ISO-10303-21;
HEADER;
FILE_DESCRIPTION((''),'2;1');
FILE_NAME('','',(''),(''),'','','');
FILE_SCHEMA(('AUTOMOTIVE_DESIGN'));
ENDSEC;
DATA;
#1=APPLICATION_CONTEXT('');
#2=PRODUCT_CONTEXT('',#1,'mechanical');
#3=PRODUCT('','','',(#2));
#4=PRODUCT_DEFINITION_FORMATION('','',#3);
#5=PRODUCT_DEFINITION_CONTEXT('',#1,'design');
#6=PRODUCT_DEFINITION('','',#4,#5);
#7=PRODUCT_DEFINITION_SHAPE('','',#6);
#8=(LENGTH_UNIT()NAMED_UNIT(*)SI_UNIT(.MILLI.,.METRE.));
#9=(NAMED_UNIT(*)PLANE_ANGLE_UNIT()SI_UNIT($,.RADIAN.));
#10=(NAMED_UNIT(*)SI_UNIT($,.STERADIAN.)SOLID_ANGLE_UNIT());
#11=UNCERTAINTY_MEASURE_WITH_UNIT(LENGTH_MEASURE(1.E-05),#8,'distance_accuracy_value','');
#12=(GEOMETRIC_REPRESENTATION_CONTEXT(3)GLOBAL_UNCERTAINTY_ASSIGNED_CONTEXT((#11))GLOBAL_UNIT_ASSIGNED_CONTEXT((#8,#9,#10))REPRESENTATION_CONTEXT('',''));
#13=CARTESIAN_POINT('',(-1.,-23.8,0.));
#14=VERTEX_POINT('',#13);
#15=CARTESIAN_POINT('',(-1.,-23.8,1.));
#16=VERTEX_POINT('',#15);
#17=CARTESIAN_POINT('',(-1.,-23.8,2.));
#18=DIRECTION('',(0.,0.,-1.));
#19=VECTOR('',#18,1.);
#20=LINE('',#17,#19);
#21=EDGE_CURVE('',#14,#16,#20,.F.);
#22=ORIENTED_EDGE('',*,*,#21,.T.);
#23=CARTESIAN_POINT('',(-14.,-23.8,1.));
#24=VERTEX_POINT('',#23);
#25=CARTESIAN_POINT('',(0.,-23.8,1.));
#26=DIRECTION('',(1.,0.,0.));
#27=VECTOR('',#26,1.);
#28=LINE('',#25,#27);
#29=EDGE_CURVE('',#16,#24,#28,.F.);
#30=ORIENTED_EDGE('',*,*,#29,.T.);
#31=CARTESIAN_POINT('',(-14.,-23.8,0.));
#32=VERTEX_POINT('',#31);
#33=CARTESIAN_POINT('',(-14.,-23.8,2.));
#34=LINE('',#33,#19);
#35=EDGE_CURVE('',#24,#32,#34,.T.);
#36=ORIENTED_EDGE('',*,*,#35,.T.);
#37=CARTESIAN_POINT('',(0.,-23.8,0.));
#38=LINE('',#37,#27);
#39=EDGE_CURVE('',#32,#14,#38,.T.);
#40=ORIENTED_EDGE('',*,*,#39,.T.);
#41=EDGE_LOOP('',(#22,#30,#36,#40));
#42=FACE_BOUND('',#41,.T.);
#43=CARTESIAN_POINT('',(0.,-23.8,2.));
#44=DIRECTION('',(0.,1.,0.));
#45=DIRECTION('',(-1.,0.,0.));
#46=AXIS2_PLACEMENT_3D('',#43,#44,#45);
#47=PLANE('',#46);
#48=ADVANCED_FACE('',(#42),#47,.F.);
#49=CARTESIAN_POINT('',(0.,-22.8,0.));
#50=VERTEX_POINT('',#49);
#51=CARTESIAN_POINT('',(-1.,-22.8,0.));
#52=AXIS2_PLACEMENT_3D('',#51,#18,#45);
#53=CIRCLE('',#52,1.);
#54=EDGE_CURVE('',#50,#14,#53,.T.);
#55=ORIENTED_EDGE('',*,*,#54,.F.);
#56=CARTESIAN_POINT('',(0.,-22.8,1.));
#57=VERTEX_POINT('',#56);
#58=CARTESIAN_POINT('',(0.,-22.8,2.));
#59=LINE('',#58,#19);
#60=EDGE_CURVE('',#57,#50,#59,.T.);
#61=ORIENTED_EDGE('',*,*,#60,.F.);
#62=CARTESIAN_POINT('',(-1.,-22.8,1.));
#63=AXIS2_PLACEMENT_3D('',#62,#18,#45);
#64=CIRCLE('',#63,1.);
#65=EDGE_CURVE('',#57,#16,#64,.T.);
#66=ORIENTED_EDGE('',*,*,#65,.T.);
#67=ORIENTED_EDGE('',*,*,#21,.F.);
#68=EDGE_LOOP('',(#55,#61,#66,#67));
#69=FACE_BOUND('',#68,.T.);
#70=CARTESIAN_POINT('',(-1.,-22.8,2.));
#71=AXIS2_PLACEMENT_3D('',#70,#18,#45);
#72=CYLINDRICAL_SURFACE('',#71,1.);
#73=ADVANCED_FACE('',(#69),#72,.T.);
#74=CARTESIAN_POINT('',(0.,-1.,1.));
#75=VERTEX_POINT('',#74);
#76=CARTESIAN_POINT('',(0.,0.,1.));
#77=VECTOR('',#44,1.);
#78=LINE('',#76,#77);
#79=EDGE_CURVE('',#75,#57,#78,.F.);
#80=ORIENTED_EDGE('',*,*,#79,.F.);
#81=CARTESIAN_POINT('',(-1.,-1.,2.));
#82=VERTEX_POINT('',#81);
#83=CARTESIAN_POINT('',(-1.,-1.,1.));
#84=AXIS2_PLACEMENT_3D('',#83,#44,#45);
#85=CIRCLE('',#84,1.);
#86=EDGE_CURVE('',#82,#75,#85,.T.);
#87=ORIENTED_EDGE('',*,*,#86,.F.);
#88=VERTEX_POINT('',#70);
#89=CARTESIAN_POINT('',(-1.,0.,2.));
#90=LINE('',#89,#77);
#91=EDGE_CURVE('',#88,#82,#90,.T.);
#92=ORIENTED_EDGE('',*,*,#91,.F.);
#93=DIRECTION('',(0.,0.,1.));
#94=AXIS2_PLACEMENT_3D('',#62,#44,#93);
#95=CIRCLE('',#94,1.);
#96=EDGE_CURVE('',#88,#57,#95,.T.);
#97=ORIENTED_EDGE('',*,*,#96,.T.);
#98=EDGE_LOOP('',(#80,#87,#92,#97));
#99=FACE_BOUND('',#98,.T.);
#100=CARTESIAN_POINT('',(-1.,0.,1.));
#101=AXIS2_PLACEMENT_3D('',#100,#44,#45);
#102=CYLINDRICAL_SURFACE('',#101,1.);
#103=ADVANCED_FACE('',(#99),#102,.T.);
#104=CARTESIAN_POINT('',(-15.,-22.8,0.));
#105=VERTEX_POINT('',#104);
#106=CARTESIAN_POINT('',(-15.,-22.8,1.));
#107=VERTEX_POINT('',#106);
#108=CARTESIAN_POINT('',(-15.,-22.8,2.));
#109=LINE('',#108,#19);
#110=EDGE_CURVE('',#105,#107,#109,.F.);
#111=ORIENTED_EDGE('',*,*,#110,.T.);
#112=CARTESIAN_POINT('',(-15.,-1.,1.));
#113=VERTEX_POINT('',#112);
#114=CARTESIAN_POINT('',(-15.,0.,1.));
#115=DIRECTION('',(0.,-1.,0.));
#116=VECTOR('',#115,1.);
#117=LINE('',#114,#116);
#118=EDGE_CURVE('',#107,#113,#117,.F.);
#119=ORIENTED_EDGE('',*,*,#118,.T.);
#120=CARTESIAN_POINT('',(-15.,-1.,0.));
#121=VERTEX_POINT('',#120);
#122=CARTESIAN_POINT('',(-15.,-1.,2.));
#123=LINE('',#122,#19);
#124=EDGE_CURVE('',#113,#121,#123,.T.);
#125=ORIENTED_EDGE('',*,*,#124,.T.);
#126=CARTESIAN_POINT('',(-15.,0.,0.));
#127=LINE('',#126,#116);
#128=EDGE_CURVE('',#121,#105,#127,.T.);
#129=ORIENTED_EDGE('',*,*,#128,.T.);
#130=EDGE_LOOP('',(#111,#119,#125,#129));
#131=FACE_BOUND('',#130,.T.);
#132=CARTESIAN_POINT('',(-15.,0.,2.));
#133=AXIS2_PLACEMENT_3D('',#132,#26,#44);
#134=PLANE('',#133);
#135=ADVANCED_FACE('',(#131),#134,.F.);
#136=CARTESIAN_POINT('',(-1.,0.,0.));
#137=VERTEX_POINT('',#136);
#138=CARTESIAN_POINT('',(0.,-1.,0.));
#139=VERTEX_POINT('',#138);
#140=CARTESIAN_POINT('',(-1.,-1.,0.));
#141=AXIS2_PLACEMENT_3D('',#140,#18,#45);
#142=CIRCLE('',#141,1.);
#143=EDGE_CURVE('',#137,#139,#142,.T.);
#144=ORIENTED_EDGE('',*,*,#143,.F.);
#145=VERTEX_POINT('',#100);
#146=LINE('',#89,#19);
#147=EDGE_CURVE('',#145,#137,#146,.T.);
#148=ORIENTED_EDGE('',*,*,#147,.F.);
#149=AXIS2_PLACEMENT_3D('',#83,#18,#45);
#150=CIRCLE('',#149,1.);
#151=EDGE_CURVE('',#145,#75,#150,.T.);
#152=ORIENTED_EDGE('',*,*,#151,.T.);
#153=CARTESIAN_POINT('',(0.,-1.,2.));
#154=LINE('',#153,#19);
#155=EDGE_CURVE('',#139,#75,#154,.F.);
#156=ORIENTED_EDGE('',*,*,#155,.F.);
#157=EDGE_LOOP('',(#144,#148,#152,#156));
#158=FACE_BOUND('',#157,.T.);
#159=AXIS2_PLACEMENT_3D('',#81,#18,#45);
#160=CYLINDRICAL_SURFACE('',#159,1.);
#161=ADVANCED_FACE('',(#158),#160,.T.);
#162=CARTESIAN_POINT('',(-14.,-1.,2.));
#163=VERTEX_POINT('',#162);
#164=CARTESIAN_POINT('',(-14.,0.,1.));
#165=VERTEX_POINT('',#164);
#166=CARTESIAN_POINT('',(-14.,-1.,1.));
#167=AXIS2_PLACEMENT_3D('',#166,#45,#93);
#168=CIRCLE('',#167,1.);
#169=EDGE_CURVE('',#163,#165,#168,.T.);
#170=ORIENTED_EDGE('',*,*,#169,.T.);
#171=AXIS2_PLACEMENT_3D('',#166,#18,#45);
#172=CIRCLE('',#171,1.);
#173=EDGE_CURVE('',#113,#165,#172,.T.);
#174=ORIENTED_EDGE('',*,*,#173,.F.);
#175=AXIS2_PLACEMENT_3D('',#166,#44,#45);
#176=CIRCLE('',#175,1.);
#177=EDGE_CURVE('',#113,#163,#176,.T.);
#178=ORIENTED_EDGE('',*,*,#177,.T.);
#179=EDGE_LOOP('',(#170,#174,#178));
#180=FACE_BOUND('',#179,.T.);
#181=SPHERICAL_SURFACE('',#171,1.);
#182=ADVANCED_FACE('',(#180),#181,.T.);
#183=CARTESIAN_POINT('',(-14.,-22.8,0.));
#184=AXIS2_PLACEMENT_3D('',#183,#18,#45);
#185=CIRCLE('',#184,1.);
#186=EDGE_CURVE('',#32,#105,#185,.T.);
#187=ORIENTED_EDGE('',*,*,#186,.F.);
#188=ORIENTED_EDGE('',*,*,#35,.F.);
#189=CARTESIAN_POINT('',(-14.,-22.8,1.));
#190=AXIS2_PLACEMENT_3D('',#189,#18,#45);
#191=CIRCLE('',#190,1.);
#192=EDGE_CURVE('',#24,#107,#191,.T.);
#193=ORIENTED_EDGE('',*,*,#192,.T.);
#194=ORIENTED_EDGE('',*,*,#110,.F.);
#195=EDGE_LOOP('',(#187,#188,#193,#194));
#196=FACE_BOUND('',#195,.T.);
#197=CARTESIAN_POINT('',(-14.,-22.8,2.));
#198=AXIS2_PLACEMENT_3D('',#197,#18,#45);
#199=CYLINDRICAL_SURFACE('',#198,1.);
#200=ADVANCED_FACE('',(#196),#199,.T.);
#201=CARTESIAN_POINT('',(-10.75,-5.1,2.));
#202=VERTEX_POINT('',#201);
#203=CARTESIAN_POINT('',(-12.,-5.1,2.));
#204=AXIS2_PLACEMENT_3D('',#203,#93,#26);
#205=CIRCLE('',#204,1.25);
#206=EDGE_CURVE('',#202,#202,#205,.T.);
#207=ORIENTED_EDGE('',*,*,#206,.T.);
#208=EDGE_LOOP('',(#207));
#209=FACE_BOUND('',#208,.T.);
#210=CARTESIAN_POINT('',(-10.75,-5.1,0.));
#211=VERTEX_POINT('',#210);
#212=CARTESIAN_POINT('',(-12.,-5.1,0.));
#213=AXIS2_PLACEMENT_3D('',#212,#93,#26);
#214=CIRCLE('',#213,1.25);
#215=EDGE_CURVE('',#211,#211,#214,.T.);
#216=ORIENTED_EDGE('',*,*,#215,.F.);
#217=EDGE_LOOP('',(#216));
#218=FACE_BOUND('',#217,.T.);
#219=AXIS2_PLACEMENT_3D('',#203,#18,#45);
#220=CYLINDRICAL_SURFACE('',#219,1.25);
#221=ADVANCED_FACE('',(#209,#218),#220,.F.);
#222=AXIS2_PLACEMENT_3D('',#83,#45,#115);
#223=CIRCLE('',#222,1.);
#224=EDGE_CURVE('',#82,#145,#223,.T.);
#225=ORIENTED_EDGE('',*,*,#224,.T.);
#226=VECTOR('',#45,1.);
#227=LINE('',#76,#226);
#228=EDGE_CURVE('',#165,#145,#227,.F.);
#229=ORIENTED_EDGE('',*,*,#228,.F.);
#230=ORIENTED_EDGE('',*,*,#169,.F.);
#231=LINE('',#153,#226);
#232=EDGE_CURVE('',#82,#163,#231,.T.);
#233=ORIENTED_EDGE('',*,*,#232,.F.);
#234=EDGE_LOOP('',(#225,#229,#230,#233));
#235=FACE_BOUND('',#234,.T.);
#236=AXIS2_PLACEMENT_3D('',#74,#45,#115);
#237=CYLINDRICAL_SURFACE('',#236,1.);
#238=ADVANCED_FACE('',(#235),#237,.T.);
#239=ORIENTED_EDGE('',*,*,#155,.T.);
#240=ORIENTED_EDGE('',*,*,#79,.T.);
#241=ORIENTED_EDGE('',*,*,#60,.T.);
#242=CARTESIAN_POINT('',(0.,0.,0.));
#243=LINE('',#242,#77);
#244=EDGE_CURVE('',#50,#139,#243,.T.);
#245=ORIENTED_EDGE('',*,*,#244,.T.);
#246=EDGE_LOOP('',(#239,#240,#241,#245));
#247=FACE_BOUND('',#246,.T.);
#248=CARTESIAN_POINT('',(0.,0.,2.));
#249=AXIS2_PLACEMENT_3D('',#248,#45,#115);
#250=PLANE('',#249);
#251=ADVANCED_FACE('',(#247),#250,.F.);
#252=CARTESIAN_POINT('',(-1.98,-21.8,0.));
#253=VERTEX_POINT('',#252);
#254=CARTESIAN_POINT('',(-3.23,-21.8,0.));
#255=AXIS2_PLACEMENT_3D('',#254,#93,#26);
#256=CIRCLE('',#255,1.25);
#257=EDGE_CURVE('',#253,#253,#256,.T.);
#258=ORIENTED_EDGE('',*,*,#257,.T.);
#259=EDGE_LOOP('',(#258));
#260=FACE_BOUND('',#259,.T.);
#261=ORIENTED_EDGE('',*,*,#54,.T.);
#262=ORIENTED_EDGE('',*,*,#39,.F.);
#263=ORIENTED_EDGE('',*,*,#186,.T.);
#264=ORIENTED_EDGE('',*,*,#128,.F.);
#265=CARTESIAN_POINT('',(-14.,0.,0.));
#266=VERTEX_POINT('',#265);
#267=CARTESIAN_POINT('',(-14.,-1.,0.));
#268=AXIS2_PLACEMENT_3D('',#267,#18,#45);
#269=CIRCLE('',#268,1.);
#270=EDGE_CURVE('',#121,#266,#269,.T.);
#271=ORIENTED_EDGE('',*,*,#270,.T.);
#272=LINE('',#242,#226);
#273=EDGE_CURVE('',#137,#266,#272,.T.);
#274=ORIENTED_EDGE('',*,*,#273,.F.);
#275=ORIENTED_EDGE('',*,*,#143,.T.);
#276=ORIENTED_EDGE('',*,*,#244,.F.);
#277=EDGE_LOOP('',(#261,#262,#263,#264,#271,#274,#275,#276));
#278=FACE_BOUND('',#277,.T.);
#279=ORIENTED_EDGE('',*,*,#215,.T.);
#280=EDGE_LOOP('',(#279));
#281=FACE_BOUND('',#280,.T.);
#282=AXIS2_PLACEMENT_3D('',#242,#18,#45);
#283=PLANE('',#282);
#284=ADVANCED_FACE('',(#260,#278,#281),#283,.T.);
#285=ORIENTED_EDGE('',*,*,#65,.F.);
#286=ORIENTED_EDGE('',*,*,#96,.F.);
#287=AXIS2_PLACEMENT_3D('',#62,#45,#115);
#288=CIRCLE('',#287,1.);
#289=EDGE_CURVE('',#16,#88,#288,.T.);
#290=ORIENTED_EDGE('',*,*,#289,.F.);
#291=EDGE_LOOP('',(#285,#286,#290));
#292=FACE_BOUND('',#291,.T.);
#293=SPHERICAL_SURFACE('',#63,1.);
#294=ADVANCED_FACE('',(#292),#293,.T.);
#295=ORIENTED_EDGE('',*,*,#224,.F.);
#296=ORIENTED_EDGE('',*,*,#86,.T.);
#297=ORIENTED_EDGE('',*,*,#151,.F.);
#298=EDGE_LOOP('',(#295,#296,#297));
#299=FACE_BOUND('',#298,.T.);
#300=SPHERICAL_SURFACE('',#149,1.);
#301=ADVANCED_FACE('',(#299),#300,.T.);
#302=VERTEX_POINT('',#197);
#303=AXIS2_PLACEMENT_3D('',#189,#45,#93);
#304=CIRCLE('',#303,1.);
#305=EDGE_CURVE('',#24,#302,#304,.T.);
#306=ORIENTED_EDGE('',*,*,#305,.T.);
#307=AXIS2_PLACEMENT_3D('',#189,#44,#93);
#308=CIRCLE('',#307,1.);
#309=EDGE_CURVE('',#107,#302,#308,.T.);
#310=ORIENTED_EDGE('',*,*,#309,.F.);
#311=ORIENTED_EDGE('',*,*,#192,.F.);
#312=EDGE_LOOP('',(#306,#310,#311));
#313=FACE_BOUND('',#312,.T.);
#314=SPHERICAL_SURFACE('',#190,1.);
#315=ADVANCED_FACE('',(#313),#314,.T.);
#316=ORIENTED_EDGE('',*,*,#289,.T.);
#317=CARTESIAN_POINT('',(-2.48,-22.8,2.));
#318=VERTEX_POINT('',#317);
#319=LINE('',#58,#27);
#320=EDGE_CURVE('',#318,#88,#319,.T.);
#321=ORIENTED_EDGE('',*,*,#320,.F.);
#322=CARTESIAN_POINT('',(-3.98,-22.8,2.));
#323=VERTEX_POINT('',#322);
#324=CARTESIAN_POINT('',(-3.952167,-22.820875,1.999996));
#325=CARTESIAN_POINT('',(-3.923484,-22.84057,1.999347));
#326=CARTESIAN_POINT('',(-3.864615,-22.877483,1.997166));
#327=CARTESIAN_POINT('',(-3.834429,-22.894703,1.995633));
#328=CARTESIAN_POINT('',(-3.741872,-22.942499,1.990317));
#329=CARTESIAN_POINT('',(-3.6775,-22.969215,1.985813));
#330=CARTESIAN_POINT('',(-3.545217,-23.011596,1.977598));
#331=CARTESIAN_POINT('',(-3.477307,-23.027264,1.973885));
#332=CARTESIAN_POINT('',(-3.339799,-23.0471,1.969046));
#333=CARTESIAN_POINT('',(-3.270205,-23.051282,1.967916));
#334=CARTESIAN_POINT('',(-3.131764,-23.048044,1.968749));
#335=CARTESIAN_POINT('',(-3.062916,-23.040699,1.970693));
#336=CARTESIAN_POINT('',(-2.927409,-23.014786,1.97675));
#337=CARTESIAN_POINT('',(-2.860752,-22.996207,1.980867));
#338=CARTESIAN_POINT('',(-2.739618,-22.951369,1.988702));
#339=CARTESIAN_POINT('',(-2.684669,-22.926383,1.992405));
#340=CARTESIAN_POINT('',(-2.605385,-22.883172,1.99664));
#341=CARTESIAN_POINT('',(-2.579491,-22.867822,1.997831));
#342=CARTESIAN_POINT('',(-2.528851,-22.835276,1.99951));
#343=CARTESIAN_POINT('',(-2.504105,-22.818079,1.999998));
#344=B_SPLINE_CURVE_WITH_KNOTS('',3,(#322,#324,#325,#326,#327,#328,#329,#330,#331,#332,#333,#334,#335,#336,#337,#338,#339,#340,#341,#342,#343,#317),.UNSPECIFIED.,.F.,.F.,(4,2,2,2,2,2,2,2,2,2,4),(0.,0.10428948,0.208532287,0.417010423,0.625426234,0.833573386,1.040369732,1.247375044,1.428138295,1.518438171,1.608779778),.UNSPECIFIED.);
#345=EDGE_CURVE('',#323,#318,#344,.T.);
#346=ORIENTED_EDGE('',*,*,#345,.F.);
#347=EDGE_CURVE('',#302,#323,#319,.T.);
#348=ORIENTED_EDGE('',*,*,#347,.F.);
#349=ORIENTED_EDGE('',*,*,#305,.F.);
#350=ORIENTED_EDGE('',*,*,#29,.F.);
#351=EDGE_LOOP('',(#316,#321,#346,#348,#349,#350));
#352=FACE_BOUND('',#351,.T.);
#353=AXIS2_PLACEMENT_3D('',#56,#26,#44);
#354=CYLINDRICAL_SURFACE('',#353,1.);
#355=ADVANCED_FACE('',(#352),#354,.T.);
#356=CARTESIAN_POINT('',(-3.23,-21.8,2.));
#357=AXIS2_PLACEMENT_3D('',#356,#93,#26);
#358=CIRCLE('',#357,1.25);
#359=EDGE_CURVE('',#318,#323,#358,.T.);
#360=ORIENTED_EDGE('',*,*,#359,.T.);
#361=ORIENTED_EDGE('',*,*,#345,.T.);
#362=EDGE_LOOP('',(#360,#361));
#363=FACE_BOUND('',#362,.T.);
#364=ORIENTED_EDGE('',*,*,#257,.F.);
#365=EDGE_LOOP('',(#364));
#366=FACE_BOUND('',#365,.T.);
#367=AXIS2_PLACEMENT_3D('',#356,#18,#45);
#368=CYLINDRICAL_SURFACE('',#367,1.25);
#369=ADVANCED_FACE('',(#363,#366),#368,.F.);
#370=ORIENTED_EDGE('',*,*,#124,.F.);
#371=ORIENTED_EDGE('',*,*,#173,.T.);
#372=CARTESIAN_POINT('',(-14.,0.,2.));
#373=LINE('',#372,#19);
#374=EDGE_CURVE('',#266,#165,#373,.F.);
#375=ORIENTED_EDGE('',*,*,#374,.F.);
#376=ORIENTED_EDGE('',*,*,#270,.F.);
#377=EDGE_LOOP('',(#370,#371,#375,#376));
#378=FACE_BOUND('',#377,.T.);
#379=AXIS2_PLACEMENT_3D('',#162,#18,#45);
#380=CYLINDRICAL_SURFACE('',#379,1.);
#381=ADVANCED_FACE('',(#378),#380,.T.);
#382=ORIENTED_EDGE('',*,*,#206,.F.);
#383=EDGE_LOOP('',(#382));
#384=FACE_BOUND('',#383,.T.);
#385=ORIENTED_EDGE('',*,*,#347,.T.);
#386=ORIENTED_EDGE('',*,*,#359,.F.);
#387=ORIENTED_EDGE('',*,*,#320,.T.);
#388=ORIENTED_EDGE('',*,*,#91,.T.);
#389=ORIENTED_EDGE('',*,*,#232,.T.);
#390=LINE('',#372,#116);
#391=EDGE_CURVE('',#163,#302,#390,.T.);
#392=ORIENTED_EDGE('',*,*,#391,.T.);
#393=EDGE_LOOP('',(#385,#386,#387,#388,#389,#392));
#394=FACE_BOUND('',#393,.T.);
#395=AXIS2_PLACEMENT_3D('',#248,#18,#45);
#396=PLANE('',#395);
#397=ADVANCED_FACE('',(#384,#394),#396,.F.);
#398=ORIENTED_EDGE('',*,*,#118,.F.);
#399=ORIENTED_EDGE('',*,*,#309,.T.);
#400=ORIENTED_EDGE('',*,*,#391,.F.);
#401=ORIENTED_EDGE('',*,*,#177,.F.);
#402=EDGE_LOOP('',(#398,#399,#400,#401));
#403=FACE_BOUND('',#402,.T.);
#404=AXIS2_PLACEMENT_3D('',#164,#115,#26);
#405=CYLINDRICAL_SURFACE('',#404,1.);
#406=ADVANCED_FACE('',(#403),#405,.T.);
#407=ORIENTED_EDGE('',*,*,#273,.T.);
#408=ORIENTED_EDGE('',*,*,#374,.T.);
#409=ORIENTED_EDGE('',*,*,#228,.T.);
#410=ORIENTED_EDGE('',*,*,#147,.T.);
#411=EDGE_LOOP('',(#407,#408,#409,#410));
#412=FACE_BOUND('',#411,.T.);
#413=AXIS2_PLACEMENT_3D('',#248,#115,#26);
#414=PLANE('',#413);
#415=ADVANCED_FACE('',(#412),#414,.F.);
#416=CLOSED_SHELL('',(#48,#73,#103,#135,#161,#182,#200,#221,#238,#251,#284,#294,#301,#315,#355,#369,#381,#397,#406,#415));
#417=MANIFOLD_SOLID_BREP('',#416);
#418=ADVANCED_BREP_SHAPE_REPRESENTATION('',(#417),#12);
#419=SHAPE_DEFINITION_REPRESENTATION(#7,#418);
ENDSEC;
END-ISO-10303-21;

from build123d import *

# Parameters (mm, degrees)
SCHIZZO1_W                   = 15
SCHIZZO1_H                   = 23.8
SCHIZZO1_R                   = 1.25
ESTRUSIONE_ESTRUSIONE1_DEPTH = 2
RACCORDO1_R                  = 1
RACCORDO2_R                  = 1


with BuildPart() as part:
    # Schizzo1 → Estrusione-Estrusione1 (new body)
    with BuildSketch(Plane.XY):
        with Locations((-7.5, -11.9)):
            Rectangle(SCHIZZO1_W, SCHIZZO1_H)
        with Locations((-12, -5.1)):
            Circle(SCHIZZO1_R, mode=Mode.SUBTRACT)
        with Locations((-3.23, -21.8)):
            Circle(SCHIZZO1_R, mode=Mode.SUBTRACT)
    extrude(amount=ESTRUSIONE_ESTRUSIONE1_DEPTH)

    # Raccordo1
    raccordo1_edges = [part.edges().sort_by_distance(p)[0] for p in [
        (0, -23.8, 1),
        (-15, -23.8, 1),
        (-15, 0, 1),
        (0, 0, 1),
    ]]
    fillet(raccordo1_edges, radius=RACCORDO1_R)

    # Raccordo2
    # the kernel refuses this fillet: 1 mm, written as the material it takes off along each edge
    with BuildSketch(Plane(origin=(0, -22.8, 2), x_dir=(-1, 0, 0), z_dir=(0, 1, 0)), Plane(origin=(-15, -1, 2), x_dir=(1, 0, 0), z_dir=(0, -1, 0))) as raccordo2_piece_1:
        with BuildLine():
            CenterArc((RACCORDO2_R, -RACCORDO2_R), RACCORDO2_R, 90, 90)
            Line((0, -RACCORDO2_R), (0, 0))
            Line((0, 0), (RACCORDO2_R, 0))
        make_face()
    extrude(amount=21.8, mode=Mode.SUBTRACT)
    with BuildSketch(Plane(origin=(-14, -23.8, 2), x_dir=(0, 1, 0), z_dir=(1, 0, 0))) as raccordo2_piece_2:
        with BuildLine():
            CenterArc((RACCORDO2_R, -RACCORDO2_R), RACCORDO2_R, 90, 90)
            Line((0, -RACCORDO2_R), (0, 0))
            Line((0, 0), (RACCORDO2_R, 0))
        make_face()
    extrude(amount=13, mode=Mode.SUBTRACT)
    with BuildSketch(Plane(origin=(-1, 0, 2), x_dir=(0, 0, -1), z_dir=(-1, 0, 0))) as raccordo2_piece_3:
        with BuildLine():
            CenterArc((RACCORDO2_R, RACCORDO2_R), RACCORDO2_R, 180, 90)
            Line((0, RACCORDO2_R), (0, 0))
            Line((0, 0), (RACCORDO2_R, 0))
        make_face()
    extrude(amount=13, mode=Mode.SUBTRACT)
    with BuildSketch(Plane(origin=(-14, -22.8, 2), x_dir=(-1, 0, 0), z_dir=(0, 1, 0))) as raccordo2_piece_4:
        with BuildLine():
            CenterArc((1 - RACCORDO2_R, -RACCORDO2_R), RACCORDO2_R, 0, 90)
            Line((1, -RACCORDO2_R), (1, 0))
            Line((1, 0), (1 - RACCORDO2_R, 0))
        make_face()
    revolve(axis=Axis((-14, -22.8, 2), (0, 0, 1)), revolution_arc=90, mode=Mode.SUBTRACT)
    with BuildSketch(Plane(origin=(-14, -1, 2), x_dir=(0, 1, 0), z_dir=(1, 0, 0))) as raccordo2_piece_5:
        with BuildLine():
            CenterArc((1 - RACCORDO2_R, -RACCORDO2_R), RACCORDO2_R, 0, 90)
            Line((1 - RACCORDO2_R, 0), (1, 0))
            Line((1, 0), (1, -RACCORDO2_R))
        make_face()
    revolve(axis=Axis((-14, -1, 2), (0, 0, 1)), revolution_arc=90, mode=Mode.SUBTRACT)
    with BuildSketch(Plane(origin=(-1, -1, 2), x_dir=(0, 1, 0), z_dir=(-1, 0, 0))) as raccordo2_piece_6:
        with BuildLine():
            CenterArc((1 - RACCORDO2_R, RACCORDO2_R), RACCORDO2_R, 270, 90)
            Line((1 - RACCORDO2_R, 0), (1, 0))
            Line((1, 0), (1, RACCORDO2_R))
        make_face()
    revolve(axis=Axis((-1, -1, 2), (0, 0, -1)), revolution_arc=90, mode=Mode.SUBTRACT)
    with BuildSketch(Plane(origin=(-1, -22.8, 2), x_dir=(0, -1, 0), z_dir=(-1, 0, 0))) as raccordo2_piece_7:
        with BuildLine():
            CenterArc((1 - RACCORDO2_R, -RACCORDO2_R), RACCORDO2_R, 0, 90)
            Line((1, -RACCORDO2_R), (1, 0))
            Line((1, 0), (1 - RACCORDO2_R, 0))
        make_face()
    revolve(axis=Axis((-1, -22.8, 2), (0, 0, 1)), revolution_arc=90, mode=Mode.SUBTRACT)


solid = part.part
